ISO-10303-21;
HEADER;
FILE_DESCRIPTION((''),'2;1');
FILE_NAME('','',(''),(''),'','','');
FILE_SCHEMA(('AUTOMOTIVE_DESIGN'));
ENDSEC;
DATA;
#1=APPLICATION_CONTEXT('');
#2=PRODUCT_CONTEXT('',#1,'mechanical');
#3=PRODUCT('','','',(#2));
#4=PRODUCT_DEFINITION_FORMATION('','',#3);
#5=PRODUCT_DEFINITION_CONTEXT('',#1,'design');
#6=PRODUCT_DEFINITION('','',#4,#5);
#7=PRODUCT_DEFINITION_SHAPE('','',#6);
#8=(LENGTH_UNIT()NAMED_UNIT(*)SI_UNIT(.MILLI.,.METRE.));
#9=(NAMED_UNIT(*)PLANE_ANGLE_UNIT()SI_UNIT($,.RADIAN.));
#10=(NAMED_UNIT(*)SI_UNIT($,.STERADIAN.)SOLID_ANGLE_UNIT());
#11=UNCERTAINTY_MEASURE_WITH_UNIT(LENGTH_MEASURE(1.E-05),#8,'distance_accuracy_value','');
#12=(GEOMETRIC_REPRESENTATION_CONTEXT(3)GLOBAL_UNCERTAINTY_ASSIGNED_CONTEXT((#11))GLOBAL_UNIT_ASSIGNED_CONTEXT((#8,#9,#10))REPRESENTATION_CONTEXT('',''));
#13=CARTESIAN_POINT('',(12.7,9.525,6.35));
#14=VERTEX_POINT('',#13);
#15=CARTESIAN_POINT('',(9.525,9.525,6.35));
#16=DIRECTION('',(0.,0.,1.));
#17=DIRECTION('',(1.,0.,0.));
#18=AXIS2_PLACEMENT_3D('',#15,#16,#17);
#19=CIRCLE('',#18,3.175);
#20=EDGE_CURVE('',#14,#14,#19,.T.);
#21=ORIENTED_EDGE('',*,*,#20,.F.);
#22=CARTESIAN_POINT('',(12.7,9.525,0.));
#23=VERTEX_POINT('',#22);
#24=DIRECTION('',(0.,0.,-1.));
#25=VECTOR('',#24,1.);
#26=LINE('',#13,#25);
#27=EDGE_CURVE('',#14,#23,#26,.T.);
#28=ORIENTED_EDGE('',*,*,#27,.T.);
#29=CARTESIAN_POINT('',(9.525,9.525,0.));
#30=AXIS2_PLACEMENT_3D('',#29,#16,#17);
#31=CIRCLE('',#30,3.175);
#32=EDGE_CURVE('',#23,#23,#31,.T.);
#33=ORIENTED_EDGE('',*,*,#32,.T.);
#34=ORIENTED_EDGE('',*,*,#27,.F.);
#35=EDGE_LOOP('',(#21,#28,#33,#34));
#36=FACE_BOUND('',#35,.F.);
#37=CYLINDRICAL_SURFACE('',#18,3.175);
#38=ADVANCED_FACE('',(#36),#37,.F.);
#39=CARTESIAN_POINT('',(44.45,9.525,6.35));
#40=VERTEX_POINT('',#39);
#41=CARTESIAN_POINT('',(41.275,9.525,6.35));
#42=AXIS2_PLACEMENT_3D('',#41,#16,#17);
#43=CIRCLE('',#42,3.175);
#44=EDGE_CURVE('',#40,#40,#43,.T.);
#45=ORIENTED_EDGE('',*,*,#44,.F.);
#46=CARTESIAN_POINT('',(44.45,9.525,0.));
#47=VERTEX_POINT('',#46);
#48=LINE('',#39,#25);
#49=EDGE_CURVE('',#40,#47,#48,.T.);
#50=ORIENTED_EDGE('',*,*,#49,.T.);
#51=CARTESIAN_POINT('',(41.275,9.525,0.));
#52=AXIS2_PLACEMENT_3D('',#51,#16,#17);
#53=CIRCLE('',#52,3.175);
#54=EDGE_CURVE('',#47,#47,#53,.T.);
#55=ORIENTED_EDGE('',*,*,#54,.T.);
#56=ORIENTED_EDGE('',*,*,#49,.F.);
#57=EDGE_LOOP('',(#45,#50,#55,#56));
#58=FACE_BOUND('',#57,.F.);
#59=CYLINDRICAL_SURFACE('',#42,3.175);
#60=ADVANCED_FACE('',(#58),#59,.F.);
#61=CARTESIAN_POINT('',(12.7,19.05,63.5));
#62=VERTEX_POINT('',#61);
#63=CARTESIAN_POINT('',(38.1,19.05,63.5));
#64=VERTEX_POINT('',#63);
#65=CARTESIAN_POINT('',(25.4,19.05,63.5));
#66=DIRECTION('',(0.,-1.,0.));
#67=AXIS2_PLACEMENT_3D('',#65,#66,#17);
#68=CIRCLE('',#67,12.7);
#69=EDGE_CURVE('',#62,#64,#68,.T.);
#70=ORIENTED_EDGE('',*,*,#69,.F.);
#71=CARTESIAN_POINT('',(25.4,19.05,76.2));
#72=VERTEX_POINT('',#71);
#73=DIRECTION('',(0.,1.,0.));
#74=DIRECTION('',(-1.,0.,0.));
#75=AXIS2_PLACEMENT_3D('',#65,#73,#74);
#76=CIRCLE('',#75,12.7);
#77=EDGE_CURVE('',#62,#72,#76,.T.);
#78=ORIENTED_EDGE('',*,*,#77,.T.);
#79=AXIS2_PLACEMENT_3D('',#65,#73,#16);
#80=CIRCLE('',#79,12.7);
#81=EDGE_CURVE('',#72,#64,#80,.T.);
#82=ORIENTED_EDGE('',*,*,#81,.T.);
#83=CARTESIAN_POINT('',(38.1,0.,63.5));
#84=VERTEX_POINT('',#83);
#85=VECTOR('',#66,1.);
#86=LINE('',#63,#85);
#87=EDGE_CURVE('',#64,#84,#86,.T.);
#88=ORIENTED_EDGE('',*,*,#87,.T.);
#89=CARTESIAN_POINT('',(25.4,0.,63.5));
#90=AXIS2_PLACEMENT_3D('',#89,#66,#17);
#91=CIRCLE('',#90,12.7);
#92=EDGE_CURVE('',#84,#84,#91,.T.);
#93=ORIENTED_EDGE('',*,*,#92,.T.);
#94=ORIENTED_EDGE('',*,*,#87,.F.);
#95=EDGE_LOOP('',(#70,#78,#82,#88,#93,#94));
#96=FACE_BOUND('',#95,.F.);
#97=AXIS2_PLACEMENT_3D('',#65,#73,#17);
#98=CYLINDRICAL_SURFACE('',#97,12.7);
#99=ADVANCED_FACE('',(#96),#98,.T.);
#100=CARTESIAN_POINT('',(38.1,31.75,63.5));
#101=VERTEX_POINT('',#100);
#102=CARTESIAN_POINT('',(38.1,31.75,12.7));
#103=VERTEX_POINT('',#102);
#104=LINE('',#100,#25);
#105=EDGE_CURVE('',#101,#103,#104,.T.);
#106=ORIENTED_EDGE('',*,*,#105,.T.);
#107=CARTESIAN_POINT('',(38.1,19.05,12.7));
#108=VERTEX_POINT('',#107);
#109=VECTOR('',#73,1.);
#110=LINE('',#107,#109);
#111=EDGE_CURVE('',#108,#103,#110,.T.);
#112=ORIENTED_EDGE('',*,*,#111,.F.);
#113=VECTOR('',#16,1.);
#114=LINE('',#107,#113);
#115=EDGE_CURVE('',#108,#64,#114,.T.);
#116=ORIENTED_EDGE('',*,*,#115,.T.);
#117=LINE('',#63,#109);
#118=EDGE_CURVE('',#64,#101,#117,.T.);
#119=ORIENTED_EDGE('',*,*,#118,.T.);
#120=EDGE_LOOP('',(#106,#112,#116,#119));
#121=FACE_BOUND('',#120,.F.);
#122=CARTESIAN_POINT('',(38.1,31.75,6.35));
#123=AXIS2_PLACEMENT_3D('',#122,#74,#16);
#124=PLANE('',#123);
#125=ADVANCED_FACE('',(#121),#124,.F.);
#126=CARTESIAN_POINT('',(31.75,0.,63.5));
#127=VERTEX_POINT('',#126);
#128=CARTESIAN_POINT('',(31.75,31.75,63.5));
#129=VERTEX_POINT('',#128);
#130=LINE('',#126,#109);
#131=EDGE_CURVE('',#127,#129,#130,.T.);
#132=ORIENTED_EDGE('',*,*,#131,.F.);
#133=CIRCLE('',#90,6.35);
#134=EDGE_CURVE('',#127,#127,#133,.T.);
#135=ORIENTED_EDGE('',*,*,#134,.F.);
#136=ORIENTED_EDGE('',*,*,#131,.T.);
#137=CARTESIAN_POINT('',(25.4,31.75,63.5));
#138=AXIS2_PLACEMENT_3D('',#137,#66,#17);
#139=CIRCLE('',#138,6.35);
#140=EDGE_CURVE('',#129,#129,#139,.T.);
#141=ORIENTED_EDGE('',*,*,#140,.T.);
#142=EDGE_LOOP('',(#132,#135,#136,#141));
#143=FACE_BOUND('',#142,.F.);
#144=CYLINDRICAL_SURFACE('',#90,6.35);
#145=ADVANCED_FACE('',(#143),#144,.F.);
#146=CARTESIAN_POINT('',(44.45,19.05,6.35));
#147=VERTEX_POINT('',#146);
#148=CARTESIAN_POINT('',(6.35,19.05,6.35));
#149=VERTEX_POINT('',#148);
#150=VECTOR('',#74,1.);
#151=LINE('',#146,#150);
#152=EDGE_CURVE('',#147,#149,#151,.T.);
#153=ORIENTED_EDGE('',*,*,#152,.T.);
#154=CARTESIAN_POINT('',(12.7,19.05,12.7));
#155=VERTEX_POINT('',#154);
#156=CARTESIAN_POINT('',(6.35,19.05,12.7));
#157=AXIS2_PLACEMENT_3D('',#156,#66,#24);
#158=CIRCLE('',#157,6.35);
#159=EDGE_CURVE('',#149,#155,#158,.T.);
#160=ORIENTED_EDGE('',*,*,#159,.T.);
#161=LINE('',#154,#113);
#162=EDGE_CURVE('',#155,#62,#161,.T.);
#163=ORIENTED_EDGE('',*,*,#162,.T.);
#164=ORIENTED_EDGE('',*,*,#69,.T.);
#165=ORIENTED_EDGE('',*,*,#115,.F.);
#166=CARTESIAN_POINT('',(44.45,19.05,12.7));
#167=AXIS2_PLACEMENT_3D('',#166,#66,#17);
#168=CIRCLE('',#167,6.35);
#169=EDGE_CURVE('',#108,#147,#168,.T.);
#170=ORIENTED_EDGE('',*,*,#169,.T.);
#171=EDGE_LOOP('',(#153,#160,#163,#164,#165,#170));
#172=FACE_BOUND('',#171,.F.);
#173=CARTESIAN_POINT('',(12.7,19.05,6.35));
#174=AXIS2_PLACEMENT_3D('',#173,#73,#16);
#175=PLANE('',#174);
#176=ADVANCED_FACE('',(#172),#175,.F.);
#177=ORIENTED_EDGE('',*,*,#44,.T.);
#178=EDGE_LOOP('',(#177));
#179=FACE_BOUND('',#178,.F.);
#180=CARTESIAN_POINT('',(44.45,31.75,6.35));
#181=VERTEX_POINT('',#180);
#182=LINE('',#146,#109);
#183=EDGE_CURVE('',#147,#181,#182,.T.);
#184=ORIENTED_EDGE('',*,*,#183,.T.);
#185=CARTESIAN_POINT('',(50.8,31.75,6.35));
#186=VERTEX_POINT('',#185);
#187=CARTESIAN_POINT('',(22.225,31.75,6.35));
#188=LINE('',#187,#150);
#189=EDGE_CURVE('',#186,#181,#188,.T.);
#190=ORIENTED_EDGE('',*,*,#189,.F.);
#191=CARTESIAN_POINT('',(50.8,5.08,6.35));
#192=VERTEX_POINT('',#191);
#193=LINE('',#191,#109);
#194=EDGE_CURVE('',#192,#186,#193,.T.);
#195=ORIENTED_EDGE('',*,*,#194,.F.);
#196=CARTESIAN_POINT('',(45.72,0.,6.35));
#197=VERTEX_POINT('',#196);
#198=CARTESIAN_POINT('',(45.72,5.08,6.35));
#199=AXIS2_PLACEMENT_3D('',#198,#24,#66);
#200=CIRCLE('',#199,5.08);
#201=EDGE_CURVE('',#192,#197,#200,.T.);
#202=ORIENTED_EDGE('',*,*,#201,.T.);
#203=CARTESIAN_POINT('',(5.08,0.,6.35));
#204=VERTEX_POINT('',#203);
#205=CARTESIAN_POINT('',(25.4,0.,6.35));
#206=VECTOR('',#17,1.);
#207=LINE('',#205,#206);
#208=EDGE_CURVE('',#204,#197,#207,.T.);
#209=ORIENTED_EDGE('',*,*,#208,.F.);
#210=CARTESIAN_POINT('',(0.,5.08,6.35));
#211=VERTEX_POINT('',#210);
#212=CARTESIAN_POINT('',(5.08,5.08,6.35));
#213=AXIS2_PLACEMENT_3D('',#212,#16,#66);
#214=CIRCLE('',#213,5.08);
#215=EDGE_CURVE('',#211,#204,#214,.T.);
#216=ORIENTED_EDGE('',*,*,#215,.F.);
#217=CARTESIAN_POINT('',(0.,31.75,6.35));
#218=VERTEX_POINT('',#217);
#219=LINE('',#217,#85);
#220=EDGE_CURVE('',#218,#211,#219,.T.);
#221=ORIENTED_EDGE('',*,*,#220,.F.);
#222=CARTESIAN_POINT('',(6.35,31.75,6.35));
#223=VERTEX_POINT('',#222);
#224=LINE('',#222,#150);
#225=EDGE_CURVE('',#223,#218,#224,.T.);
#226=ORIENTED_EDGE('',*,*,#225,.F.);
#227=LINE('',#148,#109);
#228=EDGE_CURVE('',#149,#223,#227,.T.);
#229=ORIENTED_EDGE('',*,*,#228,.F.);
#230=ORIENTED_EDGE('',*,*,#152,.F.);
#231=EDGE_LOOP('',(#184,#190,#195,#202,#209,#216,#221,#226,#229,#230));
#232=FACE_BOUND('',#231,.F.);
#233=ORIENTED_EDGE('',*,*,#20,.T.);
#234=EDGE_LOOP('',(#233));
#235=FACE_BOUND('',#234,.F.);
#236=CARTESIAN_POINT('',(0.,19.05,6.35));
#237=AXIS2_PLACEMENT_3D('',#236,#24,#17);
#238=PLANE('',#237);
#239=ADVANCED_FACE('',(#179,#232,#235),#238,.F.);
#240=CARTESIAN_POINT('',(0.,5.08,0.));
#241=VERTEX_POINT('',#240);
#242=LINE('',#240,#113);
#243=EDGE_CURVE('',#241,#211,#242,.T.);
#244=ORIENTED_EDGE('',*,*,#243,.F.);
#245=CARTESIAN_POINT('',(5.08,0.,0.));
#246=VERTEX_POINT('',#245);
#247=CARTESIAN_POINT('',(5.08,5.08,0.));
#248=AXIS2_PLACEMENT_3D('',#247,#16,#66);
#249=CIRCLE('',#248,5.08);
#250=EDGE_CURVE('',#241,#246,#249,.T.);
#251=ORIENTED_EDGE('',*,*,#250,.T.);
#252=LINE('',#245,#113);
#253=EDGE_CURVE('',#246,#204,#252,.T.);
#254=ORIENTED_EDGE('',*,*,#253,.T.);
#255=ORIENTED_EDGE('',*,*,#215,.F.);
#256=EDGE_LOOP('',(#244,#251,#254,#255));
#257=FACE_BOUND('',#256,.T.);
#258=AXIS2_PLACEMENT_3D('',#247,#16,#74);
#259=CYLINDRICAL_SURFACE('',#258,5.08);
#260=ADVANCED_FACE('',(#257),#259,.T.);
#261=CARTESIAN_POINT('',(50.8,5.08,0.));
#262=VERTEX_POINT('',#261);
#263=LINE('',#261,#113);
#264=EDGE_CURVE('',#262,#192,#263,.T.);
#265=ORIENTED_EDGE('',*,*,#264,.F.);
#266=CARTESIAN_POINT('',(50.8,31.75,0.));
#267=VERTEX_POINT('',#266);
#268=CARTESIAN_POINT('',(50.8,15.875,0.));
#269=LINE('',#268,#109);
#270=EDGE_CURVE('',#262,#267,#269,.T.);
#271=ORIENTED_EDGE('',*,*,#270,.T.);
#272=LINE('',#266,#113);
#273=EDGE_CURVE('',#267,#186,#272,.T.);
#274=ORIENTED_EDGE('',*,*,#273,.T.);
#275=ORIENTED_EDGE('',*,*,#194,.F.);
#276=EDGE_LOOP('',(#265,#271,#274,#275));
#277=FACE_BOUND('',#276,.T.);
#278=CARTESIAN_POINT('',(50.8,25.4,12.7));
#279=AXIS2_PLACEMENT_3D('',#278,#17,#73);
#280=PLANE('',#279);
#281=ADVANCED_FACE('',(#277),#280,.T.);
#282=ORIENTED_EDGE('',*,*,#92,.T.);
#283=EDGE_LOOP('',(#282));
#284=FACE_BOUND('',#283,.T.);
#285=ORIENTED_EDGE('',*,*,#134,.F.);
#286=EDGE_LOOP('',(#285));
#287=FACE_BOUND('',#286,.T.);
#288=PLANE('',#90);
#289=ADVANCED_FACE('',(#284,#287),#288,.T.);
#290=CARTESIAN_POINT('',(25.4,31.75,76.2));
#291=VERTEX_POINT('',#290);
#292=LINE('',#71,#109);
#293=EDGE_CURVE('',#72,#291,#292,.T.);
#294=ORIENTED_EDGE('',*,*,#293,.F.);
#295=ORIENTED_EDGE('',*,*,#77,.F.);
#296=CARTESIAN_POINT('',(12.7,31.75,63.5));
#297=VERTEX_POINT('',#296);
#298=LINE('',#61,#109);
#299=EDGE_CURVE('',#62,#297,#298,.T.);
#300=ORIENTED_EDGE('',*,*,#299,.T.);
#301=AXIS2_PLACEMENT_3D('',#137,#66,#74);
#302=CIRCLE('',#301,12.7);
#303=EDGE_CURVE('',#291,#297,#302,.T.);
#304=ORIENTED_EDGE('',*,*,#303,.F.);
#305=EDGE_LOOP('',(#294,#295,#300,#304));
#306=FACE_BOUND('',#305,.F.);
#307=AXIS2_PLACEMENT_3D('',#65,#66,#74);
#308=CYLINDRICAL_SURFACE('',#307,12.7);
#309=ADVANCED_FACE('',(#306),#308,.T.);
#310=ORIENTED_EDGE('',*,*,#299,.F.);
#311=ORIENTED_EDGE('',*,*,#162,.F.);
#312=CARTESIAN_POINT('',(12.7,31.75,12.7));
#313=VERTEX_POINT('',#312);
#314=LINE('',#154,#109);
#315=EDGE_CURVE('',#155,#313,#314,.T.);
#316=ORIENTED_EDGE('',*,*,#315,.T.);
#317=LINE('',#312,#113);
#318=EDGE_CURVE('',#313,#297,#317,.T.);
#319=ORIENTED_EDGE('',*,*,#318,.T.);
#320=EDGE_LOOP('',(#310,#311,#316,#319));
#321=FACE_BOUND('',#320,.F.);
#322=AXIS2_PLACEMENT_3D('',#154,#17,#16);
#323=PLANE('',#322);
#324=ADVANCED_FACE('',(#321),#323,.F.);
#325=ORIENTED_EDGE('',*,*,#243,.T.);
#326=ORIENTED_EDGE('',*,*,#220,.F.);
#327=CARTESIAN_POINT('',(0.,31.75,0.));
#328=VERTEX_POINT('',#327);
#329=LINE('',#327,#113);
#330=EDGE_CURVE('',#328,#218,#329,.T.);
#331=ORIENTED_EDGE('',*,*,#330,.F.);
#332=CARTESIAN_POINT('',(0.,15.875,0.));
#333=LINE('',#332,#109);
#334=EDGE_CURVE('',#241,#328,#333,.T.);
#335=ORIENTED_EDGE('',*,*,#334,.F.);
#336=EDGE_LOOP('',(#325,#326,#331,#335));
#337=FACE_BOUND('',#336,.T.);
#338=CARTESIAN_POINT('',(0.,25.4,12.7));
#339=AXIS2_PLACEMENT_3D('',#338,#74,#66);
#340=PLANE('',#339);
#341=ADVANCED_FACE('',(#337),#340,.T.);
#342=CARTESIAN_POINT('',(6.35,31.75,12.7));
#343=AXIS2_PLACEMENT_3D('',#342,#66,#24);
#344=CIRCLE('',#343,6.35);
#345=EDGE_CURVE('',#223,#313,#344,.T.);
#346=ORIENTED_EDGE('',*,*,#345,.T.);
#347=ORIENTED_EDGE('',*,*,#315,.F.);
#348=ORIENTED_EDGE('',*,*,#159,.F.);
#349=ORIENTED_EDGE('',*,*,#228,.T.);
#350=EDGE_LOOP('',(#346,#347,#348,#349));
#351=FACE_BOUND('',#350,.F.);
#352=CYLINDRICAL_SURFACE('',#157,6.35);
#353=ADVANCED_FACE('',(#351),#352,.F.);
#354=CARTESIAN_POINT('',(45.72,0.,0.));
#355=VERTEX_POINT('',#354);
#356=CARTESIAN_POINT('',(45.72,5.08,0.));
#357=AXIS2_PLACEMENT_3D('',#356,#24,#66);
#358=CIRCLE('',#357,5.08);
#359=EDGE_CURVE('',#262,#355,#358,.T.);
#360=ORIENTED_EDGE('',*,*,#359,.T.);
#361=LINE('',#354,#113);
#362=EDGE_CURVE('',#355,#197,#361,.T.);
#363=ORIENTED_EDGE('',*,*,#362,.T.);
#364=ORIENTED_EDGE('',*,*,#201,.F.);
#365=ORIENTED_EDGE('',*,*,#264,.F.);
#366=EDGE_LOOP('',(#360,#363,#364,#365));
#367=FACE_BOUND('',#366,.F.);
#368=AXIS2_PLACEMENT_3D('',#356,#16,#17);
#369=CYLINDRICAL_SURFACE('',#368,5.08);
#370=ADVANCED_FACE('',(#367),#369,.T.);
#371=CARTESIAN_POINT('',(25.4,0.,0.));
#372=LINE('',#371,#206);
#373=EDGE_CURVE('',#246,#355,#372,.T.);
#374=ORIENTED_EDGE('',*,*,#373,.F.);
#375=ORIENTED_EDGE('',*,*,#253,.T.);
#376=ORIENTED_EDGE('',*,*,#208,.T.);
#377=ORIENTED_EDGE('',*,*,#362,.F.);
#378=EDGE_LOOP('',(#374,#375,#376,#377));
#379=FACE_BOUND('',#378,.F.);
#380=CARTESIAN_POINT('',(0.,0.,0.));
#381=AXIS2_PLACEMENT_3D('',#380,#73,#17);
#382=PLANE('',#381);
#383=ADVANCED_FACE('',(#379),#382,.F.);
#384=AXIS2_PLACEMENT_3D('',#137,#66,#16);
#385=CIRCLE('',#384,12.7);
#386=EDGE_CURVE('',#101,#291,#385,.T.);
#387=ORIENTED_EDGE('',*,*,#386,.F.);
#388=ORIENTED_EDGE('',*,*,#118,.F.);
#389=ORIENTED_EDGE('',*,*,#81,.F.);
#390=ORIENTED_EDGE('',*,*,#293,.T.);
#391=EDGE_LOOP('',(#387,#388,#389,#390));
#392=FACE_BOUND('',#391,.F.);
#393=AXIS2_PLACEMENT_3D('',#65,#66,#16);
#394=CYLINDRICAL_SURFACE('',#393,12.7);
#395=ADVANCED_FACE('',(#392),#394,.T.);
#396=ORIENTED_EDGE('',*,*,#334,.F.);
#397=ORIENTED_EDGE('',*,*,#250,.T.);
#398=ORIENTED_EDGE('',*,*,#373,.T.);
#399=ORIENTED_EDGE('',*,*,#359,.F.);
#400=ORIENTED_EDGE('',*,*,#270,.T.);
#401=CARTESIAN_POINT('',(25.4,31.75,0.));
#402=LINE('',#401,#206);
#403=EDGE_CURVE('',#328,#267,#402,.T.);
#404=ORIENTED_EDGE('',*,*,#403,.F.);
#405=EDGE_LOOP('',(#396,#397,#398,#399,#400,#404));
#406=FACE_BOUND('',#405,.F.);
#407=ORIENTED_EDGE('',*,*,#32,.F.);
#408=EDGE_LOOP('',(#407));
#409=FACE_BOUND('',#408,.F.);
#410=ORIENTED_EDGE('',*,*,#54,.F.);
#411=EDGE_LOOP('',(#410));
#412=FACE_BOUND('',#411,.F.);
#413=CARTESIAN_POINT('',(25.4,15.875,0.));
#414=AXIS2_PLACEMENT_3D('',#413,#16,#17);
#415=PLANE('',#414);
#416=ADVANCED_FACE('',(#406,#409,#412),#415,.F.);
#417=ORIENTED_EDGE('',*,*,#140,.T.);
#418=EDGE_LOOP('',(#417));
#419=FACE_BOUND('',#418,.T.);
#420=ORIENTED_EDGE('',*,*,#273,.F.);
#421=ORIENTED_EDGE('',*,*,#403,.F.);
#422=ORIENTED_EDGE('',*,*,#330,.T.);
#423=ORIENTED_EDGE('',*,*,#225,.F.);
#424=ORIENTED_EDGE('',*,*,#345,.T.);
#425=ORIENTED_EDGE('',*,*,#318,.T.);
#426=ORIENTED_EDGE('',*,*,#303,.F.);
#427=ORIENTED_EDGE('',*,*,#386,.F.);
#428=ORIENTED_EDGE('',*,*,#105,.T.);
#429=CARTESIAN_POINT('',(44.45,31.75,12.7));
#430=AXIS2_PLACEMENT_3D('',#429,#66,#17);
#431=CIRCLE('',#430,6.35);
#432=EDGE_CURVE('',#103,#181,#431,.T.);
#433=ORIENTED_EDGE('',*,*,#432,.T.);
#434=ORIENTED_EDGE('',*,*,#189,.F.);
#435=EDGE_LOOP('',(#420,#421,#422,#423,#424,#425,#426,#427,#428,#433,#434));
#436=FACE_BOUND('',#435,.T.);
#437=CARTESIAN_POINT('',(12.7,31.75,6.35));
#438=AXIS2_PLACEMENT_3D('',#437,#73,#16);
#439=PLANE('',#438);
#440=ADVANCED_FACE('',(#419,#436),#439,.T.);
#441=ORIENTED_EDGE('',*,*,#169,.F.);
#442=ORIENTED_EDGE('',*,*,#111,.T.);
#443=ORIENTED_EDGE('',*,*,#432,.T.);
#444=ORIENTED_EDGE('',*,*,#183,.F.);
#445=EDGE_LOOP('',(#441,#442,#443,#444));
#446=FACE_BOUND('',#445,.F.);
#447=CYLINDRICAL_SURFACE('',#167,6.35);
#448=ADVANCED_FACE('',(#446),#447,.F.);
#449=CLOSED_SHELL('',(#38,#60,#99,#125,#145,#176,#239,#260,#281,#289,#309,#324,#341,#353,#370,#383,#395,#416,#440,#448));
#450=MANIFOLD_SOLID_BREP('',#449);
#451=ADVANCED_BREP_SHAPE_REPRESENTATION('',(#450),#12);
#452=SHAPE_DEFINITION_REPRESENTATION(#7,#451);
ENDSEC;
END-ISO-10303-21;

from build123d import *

# Parameters (mm, degrees)
F0_W      = 50.8
F0_H      = 31.75
F1_DEPTH  = 6.35
F2_R      = 3.175
F3_DEPTH  = 6.35
F4_W      = 25.4
F4_H      = 69.85
F5_DEPTH  = 12.7
F7_DEPTH  = 25.4
F8_R      = 12.7
F9_DEPTH  = 19.05
F10_R     = 6.35
F11_DEPTH = 31.75
F12_R     = 5.08
F13_W     = 12.7
F13_H     = 12.7
F14_DEPTH = 12.7
F16_DEPTH = 25.4
F17_W     = 12.7
F17_H     = 12.7
F18_DEPTH = 12.7
F20_DEPTH = 25.4


with BuildPart() as f1:
    # F0 (on Top) → F1 (new body)
    with BuildSketch(Plane.XY):
        with Locations((25.4, 15.875)):
            Rectangle(F0_W, F0_H)
    extrude(amount=F1_DEPTH)

    # F2 (on face) → F3 (cut)
    with BuildSketch(Plane.XY.offset(6.35)):
        with Locations((41.275, 9.525)):
            Circle(F2_R)
        with Locations((9.525, 9.525)):
            Circle(F2_R)
    extrude(amount=-F3_DEPTH, mode=Mode.SUBTRACT)

    # F4 (on face) → F5 (join)
    with BuildSketch(Plane(origin=(0, 31.75, 0), x_dir=(-1, 0, 0), z_dir=(0, 1, 0))):
        with Locations((-25.4, 41.275)):
            Rectangle(F4_W, F4_H)
    extrude(amount=-F5_DEPTH)

    # F6 (on face) → F7 (cut)
    with BuildSketch(Plane.XZ.offset(-19.05)):
        with BuildLine():
            ThreePointArc((25.4, 76.2), (34.3802561211, 72.4802561211), (38.1, 63.5))
            Line((38.1, 63.5), (38.1, 76.2))
            Line((38.1, 76.2), (25.4, 76.2))
        make_face()
        with BuildLine():
            ThreePointArc((12.7, 63.5), (16.4197438789, 72.4802561211), (25.4, 76.2))
            Line((25.4, 76.2), (12.7, 76.2))
            Line((12.7, 76.2), (12.7, 63.5))
        make_face()
    extrude(amount=-F7_DEPTH, mode=Mode.SUBTRACT)

    # F8 (on face) → F9 (join)
    with BuildSketch(Plane.XZ.offset(-19.05)):
        with Locations((25.4, 63.5)):
            Circle(F8_R)
    extrude(amount=F9_DEPTH)

    # F10 (on face) → F11 (cut)
    with BuildSketch(Plane.XZ):
        with Locations((25.4, 63.5)):
            Circle(F10_R)
    extrude(amount=-F11_DEPTH, mode=Mode.SUBTRACT)

    # F12
    f12_edges = [f1.edges().sort_by_distance(p)[0] for p in [
        (0, 0, 3.175),
        (50.8, 0, 3.175),
    ]]
    fillet(f12_edges, radius=F12_R)

    # F13 (on face) → F14 (join)
    with BuildSketch(Plane.YZ.offset(38.1)):
        with Locations((25.4, 12.7)):
            Rectangle(F13_W, F13_H)
    extrude(amount=F14_DEPTH)

    # F15 (on face) → F16 (cut)
    with BuildSketch(Plane.XZ.offset(-19.05)):
        with BuildLine():
            ThreePointArc((38.1, 12.7), (44.45, 6.35), (50.8, 12.7))
            ThreePointArc((50.8, 12.7), (44.45, 19.05), (38.1, 12.7))
        make_face()
        with BuildLine():
            Line((50.8, 19.05), (44.45, 19.05))
            ThreePointArc((44.45, 19.05), (48.9401280605, 17.1901280605), (50.8, 12.7))
            Line((50.8, 12.7), (50.8, 19.05))
        make_face()
        with BuildLine():
            Line((44.45, 19.05), (38.1, 19.05))
            Line((38.1, 19.05), (38.1, 12.7))
            ThreePointArc((38.1, 12.7), (39.9598719395, 17.1901280605), (44.45, 19.05))
        make_face()
        with BuildLine():
            ThreePointArc((50.8, 12.7), (48.9401280605, 8.2098719395), (44.45, 6.35))
            Line((44.45, 6.35), (50.8, 6.35))
            Line((50.8, 6.35), (50.8, 12.7))
        make_face()
    extrude(amount=-F16_DEPTH, mode=Mode.SUBTRACT)

    # F17 (on face) → F18 (join)
    with BuildSketch(Plane(origin=(12.7, 0, 0), x_dir=(0, -1, 0), z_dir=(-1, 0, 0))):
        with Locations((-25.4, 12.7)):
            Rectangle(F17_W, F17_H)
    extrude(amount=F18_DEPTH)

    # F19 (on face) → F20 (cut)
    with BuildSketch(Plane.XZ.offset(-19.05)):
        with BuildLine():
            ThreePointArc((6.35, 6.35), (10.8401280605, 8.2098719395), (12.7, 12.7))
            ThreePointArc((12.7, 12.7), (10.8401280605, 17.1901280605), (6.35, 19.05))
            ThreePointArc((6.35, 19.05), (1.8598719395, 17.1901280605), (0, 12.7))
            ThreePointArc((0, 12.7), (1.8598719395, 8.2098719395), (6.35, 6.35))
        make_face()
        with BuildLine():
            ThreePointArc((0, 12.7), (1.8598719395, 17.1901280605), (6.35, 19.05))
            Line((6.35, 19.05), (0, 19.05))
            Line((0, 19.05), (0, 12.7))
        make_face()
        with BuildLine():
            Line((0, 6.35), (6.35, 6.35))
            ThreePointArc((6.35, 6.35), (1.8598719395, 8.2098719395), (0, 12.7))
            Line((0, 12.7), (0, 6.35))
        make_face()
        with BuildLine():
            Line((12.7, 12.7), (12.7, 19.05))
            Line((12.7, 19.05), (6.35, 19.05))
            ThreePointArc((6.35, 19.05), (10.8401280605, 17.1901280605), (12.7, 12.7))
        make_face()
    extrude(amount=-F20_DEPTH, mode=Mode.SUBTRACT)


solid = f1.part
